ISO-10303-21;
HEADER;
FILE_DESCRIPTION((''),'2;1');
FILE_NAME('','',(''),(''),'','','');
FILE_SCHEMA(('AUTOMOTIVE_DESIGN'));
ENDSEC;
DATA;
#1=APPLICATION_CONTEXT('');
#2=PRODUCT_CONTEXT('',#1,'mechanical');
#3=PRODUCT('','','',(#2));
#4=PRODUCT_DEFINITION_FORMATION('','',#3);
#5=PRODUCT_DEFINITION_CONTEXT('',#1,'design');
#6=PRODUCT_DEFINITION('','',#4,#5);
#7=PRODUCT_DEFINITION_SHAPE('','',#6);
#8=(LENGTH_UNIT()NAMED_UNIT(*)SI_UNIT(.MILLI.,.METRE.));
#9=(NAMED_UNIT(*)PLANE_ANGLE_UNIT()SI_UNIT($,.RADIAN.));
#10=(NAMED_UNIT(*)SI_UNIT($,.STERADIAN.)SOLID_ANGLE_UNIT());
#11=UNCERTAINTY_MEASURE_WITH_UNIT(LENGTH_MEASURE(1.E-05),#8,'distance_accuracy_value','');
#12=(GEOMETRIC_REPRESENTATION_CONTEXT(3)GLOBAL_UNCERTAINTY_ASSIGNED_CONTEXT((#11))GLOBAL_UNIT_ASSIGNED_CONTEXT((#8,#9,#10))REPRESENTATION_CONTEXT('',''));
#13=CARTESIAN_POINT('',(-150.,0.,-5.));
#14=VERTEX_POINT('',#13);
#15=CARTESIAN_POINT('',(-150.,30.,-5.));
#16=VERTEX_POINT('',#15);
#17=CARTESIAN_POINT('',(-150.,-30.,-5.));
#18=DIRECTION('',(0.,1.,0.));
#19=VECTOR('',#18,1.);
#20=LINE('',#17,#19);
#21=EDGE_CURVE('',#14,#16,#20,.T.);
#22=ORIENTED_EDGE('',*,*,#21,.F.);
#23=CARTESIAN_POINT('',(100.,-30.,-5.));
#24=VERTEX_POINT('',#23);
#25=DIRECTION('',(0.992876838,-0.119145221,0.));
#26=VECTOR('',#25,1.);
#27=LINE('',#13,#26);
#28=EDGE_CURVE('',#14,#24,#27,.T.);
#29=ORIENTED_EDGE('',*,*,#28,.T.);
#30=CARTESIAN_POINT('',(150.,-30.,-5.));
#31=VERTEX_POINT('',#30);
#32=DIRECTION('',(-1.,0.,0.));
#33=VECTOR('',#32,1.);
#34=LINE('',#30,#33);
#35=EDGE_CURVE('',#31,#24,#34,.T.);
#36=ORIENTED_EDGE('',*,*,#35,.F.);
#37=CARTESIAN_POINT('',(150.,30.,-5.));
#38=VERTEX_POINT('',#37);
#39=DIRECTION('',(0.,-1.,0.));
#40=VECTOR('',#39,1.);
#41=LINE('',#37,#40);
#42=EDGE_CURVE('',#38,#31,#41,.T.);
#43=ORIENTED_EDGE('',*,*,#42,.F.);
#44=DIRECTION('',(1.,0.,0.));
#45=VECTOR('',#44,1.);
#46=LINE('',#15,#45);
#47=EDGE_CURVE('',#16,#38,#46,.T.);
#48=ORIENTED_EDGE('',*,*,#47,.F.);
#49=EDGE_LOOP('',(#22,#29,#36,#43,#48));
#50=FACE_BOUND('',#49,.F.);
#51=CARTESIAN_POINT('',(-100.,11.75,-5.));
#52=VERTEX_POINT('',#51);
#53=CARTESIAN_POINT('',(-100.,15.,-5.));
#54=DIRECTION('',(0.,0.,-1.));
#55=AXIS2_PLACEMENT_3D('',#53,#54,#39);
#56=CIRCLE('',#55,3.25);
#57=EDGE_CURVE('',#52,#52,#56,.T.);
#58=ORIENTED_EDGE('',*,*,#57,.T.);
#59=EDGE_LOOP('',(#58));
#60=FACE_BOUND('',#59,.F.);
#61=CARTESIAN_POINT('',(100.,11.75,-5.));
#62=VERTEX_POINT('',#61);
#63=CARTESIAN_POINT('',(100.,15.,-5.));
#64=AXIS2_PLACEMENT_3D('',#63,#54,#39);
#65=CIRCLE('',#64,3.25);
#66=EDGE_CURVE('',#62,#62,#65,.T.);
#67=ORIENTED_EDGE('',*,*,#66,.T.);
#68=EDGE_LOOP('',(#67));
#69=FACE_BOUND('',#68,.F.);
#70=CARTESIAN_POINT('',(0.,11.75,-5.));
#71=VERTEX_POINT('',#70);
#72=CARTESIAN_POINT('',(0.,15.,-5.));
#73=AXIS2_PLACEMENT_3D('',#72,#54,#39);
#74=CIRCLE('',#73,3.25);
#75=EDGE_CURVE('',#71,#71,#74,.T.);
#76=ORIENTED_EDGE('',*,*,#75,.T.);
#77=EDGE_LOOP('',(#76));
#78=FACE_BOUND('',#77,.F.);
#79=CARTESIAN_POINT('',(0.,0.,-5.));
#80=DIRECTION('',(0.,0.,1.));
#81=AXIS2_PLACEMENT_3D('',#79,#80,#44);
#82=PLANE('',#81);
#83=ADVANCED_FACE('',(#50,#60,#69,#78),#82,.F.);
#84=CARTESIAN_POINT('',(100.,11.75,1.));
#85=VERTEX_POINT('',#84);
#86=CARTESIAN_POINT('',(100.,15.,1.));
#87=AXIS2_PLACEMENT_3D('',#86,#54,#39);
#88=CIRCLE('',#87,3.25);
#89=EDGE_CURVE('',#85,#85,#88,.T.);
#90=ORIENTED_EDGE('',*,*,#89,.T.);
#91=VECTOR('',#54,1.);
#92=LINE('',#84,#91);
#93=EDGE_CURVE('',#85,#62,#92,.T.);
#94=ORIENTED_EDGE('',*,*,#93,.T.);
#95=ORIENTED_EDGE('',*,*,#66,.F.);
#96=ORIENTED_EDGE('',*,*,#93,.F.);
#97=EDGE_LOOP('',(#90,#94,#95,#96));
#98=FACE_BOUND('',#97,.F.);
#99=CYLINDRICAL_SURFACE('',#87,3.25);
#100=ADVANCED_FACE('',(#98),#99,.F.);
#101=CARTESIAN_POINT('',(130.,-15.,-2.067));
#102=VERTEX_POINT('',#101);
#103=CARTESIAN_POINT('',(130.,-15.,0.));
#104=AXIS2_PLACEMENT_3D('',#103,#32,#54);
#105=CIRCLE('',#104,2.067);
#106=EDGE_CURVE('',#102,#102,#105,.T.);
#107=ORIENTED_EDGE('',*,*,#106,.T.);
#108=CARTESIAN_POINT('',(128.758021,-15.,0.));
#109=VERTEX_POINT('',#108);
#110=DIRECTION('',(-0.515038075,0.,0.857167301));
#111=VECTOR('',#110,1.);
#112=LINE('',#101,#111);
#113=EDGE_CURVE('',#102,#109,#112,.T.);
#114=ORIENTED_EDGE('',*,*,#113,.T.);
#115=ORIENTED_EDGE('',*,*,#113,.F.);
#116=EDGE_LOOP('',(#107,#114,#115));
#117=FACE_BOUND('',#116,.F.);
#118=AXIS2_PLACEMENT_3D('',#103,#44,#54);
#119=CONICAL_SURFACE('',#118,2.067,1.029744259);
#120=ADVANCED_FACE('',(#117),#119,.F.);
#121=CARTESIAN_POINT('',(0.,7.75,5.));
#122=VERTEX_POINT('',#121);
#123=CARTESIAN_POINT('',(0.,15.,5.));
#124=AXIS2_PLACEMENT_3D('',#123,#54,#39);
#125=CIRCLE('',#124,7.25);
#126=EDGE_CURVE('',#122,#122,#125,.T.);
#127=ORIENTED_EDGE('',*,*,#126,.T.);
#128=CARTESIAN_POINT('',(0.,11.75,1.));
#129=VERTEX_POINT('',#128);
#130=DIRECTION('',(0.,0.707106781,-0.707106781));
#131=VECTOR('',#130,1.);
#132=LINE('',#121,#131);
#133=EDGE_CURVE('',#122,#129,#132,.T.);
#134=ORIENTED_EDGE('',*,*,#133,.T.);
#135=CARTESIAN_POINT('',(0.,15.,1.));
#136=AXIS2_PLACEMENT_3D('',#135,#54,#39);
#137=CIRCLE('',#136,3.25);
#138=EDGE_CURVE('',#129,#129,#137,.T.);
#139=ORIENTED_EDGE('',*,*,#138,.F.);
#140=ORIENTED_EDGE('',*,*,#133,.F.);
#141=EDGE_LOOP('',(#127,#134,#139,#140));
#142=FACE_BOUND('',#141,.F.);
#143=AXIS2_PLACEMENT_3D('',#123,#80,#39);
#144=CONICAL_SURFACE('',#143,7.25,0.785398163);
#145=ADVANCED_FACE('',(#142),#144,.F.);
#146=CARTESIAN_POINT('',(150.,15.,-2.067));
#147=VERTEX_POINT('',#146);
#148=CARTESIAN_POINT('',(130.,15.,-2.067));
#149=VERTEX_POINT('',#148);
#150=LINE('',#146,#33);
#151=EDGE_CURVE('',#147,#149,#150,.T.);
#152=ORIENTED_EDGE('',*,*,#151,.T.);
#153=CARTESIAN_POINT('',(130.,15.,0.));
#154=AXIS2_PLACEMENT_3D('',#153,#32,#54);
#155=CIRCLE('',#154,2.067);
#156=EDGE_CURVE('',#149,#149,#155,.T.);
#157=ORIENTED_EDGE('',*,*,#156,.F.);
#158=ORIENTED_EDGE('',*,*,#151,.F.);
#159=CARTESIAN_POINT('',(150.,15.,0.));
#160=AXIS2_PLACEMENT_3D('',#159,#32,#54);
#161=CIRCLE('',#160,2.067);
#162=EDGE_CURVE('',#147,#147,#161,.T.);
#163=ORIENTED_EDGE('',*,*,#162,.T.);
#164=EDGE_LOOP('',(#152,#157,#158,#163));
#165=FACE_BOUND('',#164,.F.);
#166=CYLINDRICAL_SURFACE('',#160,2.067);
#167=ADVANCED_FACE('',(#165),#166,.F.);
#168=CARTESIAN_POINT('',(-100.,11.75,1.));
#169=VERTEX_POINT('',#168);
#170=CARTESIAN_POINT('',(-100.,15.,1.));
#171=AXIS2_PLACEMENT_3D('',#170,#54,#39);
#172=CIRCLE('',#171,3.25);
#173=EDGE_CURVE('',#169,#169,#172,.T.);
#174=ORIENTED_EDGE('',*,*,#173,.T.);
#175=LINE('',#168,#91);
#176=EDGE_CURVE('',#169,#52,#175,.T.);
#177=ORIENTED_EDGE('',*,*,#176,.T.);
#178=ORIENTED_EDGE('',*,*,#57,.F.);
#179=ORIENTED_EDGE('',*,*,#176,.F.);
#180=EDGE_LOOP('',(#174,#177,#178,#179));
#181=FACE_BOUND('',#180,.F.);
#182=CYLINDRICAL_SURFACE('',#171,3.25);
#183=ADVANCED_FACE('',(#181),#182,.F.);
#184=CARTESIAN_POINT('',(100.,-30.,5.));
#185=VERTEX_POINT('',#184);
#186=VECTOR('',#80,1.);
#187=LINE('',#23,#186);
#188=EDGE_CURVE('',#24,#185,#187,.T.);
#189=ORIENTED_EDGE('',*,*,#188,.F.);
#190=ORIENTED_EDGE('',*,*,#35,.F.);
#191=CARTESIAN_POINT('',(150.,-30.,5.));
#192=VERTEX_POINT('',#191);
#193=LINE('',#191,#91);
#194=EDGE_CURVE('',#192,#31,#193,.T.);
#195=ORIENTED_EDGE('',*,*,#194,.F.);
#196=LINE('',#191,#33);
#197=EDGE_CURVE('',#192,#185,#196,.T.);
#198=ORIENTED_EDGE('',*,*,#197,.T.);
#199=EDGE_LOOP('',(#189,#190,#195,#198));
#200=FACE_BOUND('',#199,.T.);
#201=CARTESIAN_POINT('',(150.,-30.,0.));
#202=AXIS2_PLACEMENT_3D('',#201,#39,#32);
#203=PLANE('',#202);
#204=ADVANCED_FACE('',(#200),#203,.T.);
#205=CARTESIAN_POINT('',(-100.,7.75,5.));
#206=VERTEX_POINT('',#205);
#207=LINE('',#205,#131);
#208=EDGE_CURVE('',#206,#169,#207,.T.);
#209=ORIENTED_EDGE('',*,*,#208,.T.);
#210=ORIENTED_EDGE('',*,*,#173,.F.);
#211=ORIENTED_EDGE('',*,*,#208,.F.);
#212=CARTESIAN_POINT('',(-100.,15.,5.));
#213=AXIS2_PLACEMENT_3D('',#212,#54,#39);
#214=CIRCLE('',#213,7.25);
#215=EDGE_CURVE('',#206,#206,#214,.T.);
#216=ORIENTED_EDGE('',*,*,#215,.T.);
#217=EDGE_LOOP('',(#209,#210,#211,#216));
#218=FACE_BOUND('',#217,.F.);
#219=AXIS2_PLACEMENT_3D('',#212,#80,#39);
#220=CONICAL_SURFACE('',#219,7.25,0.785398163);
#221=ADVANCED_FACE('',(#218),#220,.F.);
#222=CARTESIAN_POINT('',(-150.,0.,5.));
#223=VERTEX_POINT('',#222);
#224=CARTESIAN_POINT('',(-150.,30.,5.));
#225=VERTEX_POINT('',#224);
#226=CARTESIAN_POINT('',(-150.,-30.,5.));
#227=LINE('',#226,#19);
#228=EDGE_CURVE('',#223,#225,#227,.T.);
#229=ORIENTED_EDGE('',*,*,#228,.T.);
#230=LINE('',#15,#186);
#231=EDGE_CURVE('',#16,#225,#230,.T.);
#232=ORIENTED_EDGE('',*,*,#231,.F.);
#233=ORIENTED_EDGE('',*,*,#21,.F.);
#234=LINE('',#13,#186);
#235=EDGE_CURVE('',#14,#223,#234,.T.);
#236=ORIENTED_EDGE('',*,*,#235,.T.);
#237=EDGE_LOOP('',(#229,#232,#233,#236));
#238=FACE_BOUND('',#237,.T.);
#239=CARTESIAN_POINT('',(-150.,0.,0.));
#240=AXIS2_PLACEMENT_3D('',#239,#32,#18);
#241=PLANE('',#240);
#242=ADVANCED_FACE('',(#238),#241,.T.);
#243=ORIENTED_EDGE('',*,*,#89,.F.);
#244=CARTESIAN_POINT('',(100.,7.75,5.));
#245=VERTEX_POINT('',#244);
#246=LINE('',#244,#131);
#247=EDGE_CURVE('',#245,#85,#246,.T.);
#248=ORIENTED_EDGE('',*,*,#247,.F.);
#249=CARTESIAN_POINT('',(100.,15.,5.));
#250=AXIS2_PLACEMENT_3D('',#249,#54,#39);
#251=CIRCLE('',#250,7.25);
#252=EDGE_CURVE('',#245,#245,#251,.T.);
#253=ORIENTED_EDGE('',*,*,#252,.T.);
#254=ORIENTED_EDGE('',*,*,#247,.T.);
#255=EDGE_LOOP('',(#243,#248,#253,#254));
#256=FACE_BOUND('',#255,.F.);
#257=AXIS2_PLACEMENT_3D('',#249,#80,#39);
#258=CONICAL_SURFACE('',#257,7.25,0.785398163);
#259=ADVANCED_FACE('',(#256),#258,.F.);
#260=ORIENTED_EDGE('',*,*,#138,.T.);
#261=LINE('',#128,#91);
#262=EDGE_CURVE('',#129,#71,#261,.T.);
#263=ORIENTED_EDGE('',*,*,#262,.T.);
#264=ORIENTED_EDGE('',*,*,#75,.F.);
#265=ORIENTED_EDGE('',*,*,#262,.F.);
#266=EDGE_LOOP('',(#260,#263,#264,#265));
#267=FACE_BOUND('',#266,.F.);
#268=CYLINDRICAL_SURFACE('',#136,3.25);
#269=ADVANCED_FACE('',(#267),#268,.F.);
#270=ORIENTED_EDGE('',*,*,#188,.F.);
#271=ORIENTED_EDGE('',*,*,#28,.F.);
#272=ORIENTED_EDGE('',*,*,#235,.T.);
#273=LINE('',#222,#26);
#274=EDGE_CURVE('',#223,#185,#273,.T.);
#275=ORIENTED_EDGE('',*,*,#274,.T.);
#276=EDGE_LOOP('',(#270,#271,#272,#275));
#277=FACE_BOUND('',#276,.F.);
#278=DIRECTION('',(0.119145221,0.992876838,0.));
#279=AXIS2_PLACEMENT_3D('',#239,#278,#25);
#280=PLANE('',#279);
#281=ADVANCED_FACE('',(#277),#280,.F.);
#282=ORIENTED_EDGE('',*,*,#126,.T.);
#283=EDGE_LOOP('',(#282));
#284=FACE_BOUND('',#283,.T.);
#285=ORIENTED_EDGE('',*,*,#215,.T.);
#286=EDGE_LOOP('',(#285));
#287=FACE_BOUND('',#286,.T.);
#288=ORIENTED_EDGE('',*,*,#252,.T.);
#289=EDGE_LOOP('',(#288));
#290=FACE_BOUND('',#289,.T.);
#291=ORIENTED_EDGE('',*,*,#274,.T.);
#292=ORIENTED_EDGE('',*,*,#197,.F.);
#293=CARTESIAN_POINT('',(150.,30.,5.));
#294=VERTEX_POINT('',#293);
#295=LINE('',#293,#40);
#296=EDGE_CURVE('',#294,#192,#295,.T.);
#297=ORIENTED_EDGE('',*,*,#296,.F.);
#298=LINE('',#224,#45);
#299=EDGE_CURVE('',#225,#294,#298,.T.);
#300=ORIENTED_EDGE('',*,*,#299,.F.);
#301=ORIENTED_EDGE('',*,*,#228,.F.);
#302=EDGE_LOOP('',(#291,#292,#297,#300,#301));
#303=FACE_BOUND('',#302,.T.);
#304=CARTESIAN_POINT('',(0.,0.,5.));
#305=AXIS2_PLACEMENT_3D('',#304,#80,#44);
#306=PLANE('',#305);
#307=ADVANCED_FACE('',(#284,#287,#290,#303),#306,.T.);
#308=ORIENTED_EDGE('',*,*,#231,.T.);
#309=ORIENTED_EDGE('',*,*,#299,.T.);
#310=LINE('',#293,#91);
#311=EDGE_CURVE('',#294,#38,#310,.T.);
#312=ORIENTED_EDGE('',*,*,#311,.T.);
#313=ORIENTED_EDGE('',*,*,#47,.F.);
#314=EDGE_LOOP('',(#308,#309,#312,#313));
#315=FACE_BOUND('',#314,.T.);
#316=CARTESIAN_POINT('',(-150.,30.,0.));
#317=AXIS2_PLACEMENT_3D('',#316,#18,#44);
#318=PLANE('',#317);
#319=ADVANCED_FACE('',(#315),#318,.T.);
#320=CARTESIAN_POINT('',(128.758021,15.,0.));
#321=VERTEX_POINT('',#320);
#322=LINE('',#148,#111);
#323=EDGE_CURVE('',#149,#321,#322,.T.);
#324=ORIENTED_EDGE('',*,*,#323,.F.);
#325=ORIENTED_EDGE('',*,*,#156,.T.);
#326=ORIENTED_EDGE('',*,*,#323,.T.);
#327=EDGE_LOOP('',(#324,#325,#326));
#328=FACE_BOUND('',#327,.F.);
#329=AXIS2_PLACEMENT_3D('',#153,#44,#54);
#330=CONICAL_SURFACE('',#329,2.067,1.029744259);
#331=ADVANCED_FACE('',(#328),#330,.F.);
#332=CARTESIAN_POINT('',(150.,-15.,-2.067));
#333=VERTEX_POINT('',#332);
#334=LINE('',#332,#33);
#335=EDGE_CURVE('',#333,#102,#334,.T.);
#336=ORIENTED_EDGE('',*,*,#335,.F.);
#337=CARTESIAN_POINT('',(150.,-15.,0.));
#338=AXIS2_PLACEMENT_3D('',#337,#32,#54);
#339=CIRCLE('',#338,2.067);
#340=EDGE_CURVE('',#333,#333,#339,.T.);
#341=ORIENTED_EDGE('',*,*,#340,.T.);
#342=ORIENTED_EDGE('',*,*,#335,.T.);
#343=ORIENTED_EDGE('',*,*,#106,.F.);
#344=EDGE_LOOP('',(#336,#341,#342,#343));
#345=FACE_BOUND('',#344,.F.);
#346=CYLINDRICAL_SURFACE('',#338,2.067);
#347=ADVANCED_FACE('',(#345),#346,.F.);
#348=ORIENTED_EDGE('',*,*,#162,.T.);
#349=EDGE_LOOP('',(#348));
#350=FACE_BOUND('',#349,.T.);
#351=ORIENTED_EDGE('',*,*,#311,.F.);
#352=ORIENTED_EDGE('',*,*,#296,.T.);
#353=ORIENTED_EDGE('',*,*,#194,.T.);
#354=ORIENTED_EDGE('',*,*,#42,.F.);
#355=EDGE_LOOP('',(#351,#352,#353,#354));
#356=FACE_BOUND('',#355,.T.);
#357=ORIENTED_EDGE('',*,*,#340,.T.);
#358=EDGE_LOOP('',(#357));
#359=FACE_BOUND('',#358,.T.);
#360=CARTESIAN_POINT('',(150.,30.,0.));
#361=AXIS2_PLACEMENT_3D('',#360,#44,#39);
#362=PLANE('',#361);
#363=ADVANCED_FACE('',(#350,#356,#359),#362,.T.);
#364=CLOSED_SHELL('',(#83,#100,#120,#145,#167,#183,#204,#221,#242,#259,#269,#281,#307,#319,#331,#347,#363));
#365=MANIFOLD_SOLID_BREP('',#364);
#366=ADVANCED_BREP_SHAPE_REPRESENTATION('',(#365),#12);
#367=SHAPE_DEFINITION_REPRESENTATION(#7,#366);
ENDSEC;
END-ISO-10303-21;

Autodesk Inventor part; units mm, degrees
ref_plane "YZ Plane" through (0, 0, 0) normal (1, 0, 0) x (0, 1, 0)
ref_plane "XZ Plane" through (0, 0, 0) normal (0, 1, 0) x (-1, 0, 0)
ref_plane "XY Plane" through (0, 0, 0) normal (0, 0, 1) x (1, 0, 0)
sketch "Esboço1" plane through (0, 0, 0) normal (0, 0, 1) x (1, 0, 0)
  line L0 (-210, 0) -> (210, 0) construction
  line L1 (0, -42) -> (0, 42) construction
  line L2 (-150, 30) -> (150, 30)
  line L3 (150, 30) -> (150, -30)
  line L4 (150, -30) -> (-150, -30)
  line L5 (-150, -30) -> (-150, 30)
  line L6 (-150, 15) -> (150, 15) construction
  line L7 (-150, -15) -> (150, -15) construction
  line L8 (-150, 0) -> (100, -30)
  point P0 (0, 0)
  point P1 (-100, 15)
  point P2 (-100, -15)
  point P3 (100, 15)
  point P4 (100, -15)
  point P5 (0, 15)
  point P6 (0, -15)
  dimension "d0" = 60
  dimension "d1" = 300
  dimension "d2" = 30
  dimension "d3" = 100
  dimension "d24" = 250
extrude "Extrusão1" add sketch "Esboço1" along normal mid plane 10 contours L2 L3 L4 L8 L5
sketch "Esboço2" plane through (0, 0, 5) normal (0, 0, 1) x (1, 0, 0)
  point P0 (0, 0)
  point P1 (-100, 15)
  point P2 (-100, -15)
  point P3 (0, 15)
  point P4 (0, -15)
  point P5 (100, 15)
  point P6 (100, -15)
hole "Furo1" at (-100, 15, 5) at (0, 15, 5) at (100, 15, 5) direction (0, 0, -1) diameter 6.5 end through all countersink diameter 14.5 countersink angle 90 clearance for "Countersunk Flat Head Hex Socket Screw ISO 10642" size "M6" standard "ISO"
sketch "Esboço3" plane through (150, -30, 5) normal (1, 0, 0) x (0, 0, -1)
  line L0 (12, 30) -> (-2, 30) construction
  line L1 (5, -12) -> (5, 72) construction
  point P0 (5, 30)
  point P1 (5, 45)
  point P2 (5, 15)
  dimension "d16" = 30
hole "Furo2" at (150, 15, 0) at (150, -15, 0) direction (-1, 0, 0) diameter 4.134 depth 20 tip angle 118 thread size "M5x0.8" class "6H" standard "ISO Metric profile"
properties part number "Chapa Suporte 2R (Trilho Roletado)" material "Aluminio 1060"
